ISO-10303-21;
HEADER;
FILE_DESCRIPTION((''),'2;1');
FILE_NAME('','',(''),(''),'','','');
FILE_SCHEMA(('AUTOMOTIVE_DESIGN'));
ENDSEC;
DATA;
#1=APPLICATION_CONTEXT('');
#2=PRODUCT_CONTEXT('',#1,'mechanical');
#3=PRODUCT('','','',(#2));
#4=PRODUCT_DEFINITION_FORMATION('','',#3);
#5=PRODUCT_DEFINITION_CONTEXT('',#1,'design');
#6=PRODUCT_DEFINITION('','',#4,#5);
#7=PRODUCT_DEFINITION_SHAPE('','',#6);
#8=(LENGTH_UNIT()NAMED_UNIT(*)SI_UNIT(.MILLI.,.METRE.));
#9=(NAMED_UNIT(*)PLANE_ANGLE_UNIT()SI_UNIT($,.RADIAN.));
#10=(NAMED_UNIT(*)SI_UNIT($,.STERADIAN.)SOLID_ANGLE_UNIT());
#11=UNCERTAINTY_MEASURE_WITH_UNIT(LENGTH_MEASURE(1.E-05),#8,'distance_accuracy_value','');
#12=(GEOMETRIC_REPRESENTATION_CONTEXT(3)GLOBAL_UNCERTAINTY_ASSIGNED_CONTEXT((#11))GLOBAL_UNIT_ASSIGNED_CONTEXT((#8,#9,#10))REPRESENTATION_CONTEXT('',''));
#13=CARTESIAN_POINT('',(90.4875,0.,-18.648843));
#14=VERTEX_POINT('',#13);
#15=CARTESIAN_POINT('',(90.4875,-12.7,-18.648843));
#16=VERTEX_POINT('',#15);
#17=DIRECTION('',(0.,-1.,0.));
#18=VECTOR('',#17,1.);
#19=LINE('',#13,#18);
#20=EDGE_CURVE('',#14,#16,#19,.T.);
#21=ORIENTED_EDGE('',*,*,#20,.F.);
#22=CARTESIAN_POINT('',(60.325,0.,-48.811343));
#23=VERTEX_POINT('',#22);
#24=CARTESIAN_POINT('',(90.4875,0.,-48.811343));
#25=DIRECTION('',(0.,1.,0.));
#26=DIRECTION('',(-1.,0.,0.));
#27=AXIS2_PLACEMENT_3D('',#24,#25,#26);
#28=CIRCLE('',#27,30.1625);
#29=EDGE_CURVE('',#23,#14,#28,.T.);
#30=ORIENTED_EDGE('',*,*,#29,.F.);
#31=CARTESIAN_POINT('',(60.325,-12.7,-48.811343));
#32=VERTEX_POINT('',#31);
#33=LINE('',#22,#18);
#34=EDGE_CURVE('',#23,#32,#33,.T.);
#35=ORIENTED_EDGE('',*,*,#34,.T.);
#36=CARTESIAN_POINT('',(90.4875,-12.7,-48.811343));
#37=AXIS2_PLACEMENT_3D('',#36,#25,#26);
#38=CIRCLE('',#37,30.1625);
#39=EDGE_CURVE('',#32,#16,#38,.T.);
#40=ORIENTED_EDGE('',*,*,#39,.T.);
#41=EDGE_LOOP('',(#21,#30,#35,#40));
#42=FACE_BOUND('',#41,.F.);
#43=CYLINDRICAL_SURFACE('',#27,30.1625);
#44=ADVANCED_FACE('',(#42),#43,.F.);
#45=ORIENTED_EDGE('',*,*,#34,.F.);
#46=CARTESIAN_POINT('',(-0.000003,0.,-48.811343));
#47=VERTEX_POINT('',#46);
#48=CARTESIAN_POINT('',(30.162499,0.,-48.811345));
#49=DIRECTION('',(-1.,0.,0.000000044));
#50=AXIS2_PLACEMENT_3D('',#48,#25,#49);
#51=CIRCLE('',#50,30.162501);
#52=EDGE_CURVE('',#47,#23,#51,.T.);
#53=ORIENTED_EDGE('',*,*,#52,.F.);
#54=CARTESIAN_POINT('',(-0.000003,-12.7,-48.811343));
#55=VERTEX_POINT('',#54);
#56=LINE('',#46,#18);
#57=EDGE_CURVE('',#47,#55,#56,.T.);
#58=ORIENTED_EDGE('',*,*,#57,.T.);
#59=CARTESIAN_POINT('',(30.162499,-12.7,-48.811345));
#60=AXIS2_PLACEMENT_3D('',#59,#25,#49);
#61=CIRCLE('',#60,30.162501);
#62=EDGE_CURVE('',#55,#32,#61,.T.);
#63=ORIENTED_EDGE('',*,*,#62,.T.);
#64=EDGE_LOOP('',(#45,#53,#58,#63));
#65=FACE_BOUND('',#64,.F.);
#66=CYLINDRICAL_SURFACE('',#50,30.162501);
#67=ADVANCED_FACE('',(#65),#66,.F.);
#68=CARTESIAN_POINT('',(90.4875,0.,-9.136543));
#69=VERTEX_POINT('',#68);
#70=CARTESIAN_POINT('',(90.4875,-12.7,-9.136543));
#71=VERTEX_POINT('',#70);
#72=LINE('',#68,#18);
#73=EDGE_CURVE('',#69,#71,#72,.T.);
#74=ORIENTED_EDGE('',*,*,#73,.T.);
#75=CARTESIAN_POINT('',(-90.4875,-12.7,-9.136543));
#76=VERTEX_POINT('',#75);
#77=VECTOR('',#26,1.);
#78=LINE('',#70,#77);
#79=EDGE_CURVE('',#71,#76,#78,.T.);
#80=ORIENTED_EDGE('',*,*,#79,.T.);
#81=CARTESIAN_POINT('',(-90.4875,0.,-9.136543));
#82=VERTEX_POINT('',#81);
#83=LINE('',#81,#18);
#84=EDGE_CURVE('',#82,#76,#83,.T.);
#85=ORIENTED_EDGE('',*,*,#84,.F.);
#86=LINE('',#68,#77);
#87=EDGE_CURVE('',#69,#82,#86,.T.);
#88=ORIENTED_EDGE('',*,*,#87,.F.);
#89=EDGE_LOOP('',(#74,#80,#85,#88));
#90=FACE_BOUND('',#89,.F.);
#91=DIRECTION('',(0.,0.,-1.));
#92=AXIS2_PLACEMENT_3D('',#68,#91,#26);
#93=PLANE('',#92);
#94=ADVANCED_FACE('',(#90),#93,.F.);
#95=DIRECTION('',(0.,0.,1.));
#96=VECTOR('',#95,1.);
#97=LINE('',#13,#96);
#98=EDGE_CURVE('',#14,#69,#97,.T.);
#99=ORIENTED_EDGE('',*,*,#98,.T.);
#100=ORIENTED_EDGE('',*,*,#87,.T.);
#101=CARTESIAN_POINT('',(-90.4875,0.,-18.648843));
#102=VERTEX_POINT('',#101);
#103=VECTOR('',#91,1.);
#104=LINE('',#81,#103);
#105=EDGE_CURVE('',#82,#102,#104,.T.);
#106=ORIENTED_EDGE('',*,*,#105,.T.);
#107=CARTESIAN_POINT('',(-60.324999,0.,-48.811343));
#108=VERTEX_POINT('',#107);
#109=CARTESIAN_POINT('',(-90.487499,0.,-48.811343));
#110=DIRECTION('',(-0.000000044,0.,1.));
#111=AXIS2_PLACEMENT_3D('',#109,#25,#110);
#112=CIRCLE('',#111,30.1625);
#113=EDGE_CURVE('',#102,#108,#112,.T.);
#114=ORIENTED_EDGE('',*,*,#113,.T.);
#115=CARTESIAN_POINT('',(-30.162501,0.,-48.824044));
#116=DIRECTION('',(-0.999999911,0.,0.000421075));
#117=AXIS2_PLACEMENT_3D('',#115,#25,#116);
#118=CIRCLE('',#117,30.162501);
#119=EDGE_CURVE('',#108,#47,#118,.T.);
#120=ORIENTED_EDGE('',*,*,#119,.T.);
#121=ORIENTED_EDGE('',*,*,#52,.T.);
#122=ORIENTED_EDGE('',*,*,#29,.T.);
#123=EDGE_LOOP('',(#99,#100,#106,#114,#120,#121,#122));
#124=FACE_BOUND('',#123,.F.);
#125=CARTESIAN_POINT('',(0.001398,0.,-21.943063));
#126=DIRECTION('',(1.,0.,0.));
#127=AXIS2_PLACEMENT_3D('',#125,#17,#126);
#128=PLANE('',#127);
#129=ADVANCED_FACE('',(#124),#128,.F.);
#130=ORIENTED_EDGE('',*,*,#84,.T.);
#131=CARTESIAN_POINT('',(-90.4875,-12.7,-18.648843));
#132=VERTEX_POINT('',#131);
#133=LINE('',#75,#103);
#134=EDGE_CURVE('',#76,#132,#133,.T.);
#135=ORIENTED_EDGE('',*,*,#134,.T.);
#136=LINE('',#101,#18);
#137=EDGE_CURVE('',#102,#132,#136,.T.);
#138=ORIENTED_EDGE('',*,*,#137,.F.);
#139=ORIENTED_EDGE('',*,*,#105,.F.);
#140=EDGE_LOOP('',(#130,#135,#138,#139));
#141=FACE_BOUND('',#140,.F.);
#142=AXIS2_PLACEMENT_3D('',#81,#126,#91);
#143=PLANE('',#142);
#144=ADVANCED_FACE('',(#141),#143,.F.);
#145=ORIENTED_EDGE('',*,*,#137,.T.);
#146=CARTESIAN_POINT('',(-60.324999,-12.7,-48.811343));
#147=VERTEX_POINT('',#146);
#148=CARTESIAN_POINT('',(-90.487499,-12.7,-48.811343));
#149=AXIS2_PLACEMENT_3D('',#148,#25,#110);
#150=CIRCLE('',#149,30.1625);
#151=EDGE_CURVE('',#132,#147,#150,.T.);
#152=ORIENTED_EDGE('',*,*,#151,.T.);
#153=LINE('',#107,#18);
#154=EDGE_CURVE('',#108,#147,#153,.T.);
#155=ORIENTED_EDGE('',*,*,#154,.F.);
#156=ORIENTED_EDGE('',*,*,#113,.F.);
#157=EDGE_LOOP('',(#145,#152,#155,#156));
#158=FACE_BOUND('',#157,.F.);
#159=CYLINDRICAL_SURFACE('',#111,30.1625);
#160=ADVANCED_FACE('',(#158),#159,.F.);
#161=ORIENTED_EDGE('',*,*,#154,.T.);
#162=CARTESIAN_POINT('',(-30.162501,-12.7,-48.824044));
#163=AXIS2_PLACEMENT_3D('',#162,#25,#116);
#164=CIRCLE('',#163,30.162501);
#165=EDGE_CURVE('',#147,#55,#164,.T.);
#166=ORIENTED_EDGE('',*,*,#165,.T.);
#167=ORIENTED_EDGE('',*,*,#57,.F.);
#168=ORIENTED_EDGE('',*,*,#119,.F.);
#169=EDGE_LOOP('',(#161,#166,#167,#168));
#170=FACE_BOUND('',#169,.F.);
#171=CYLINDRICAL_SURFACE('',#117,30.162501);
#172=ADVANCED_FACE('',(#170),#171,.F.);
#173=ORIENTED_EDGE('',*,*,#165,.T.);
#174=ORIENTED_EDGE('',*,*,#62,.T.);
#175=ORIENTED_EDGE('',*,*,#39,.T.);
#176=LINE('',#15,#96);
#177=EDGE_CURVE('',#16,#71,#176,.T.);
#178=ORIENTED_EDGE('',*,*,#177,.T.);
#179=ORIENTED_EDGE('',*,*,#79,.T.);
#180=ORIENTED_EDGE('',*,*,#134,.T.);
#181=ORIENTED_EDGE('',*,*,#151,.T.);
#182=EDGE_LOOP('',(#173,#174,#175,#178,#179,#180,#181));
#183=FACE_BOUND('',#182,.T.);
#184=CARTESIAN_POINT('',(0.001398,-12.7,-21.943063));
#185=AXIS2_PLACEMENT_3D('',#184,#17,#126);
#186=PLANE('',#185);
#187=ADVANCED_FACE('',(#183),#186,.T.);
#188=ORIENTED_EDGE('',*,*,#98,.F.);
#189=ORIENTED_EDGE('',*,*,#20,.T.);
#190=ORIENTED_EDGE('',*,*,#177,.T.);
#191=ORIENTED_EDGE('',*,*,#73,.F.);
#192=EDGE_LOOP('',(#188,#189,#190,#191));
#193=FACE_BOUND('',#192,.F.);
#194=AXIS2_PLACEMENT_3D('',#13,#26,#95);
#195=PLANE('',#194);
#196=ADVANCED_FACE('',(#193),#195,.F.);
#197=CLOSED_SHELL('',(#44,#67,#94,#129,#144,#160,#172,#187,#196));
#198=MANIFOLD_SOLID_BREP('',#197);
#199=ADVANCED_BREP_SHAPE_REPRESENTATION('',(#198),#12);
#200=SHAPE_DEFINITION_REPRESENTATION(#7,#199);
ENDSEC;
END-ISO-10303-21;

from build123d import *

# Parameters (mm, degrees)
F1_DEPTH = 12.7


# Not quite as in the source:
# - ends of sketch curves that miss each other by under 0.0002 mm in the source are joined


with BuildPart() as f1:
    # F0 (on Front) → F1 (new body)
    with BuildSketch(Plane.XZ):
        with BuildLine():
            Line((90.4875, -9.1365433148), (-90.4875, -9.1365433148))
            Line((-90.4875, -9.1365433148), (-90.4875, -18.6488433148))
            ThreePointArc((-90.4875, -18.6488433148), (-69.1593908483, -27.4832345546), (-60.3249986632, -48.8113433148))
            ThreePointArc((-60.3249986632, -48.8113433148), (-30.1625, -18.6615433148), (-2.6737e-06, -48.8113433154))
            ThreePointArc((-2.6737e-06, -48.8113433154), (30.1625, -18.6488433148), (60.325, -48.8113433148))
            ThreePointArc((60.325, -48.8113433148), (69.1593917125, -27.4832350273), (90.4875, -18.6488433148))
            Line((90.4875, -18.6488433148), (90.4875, -9.1365433148))
        make_face()
    extrude(amount=F1_DEPTH)


solid = f1.part
